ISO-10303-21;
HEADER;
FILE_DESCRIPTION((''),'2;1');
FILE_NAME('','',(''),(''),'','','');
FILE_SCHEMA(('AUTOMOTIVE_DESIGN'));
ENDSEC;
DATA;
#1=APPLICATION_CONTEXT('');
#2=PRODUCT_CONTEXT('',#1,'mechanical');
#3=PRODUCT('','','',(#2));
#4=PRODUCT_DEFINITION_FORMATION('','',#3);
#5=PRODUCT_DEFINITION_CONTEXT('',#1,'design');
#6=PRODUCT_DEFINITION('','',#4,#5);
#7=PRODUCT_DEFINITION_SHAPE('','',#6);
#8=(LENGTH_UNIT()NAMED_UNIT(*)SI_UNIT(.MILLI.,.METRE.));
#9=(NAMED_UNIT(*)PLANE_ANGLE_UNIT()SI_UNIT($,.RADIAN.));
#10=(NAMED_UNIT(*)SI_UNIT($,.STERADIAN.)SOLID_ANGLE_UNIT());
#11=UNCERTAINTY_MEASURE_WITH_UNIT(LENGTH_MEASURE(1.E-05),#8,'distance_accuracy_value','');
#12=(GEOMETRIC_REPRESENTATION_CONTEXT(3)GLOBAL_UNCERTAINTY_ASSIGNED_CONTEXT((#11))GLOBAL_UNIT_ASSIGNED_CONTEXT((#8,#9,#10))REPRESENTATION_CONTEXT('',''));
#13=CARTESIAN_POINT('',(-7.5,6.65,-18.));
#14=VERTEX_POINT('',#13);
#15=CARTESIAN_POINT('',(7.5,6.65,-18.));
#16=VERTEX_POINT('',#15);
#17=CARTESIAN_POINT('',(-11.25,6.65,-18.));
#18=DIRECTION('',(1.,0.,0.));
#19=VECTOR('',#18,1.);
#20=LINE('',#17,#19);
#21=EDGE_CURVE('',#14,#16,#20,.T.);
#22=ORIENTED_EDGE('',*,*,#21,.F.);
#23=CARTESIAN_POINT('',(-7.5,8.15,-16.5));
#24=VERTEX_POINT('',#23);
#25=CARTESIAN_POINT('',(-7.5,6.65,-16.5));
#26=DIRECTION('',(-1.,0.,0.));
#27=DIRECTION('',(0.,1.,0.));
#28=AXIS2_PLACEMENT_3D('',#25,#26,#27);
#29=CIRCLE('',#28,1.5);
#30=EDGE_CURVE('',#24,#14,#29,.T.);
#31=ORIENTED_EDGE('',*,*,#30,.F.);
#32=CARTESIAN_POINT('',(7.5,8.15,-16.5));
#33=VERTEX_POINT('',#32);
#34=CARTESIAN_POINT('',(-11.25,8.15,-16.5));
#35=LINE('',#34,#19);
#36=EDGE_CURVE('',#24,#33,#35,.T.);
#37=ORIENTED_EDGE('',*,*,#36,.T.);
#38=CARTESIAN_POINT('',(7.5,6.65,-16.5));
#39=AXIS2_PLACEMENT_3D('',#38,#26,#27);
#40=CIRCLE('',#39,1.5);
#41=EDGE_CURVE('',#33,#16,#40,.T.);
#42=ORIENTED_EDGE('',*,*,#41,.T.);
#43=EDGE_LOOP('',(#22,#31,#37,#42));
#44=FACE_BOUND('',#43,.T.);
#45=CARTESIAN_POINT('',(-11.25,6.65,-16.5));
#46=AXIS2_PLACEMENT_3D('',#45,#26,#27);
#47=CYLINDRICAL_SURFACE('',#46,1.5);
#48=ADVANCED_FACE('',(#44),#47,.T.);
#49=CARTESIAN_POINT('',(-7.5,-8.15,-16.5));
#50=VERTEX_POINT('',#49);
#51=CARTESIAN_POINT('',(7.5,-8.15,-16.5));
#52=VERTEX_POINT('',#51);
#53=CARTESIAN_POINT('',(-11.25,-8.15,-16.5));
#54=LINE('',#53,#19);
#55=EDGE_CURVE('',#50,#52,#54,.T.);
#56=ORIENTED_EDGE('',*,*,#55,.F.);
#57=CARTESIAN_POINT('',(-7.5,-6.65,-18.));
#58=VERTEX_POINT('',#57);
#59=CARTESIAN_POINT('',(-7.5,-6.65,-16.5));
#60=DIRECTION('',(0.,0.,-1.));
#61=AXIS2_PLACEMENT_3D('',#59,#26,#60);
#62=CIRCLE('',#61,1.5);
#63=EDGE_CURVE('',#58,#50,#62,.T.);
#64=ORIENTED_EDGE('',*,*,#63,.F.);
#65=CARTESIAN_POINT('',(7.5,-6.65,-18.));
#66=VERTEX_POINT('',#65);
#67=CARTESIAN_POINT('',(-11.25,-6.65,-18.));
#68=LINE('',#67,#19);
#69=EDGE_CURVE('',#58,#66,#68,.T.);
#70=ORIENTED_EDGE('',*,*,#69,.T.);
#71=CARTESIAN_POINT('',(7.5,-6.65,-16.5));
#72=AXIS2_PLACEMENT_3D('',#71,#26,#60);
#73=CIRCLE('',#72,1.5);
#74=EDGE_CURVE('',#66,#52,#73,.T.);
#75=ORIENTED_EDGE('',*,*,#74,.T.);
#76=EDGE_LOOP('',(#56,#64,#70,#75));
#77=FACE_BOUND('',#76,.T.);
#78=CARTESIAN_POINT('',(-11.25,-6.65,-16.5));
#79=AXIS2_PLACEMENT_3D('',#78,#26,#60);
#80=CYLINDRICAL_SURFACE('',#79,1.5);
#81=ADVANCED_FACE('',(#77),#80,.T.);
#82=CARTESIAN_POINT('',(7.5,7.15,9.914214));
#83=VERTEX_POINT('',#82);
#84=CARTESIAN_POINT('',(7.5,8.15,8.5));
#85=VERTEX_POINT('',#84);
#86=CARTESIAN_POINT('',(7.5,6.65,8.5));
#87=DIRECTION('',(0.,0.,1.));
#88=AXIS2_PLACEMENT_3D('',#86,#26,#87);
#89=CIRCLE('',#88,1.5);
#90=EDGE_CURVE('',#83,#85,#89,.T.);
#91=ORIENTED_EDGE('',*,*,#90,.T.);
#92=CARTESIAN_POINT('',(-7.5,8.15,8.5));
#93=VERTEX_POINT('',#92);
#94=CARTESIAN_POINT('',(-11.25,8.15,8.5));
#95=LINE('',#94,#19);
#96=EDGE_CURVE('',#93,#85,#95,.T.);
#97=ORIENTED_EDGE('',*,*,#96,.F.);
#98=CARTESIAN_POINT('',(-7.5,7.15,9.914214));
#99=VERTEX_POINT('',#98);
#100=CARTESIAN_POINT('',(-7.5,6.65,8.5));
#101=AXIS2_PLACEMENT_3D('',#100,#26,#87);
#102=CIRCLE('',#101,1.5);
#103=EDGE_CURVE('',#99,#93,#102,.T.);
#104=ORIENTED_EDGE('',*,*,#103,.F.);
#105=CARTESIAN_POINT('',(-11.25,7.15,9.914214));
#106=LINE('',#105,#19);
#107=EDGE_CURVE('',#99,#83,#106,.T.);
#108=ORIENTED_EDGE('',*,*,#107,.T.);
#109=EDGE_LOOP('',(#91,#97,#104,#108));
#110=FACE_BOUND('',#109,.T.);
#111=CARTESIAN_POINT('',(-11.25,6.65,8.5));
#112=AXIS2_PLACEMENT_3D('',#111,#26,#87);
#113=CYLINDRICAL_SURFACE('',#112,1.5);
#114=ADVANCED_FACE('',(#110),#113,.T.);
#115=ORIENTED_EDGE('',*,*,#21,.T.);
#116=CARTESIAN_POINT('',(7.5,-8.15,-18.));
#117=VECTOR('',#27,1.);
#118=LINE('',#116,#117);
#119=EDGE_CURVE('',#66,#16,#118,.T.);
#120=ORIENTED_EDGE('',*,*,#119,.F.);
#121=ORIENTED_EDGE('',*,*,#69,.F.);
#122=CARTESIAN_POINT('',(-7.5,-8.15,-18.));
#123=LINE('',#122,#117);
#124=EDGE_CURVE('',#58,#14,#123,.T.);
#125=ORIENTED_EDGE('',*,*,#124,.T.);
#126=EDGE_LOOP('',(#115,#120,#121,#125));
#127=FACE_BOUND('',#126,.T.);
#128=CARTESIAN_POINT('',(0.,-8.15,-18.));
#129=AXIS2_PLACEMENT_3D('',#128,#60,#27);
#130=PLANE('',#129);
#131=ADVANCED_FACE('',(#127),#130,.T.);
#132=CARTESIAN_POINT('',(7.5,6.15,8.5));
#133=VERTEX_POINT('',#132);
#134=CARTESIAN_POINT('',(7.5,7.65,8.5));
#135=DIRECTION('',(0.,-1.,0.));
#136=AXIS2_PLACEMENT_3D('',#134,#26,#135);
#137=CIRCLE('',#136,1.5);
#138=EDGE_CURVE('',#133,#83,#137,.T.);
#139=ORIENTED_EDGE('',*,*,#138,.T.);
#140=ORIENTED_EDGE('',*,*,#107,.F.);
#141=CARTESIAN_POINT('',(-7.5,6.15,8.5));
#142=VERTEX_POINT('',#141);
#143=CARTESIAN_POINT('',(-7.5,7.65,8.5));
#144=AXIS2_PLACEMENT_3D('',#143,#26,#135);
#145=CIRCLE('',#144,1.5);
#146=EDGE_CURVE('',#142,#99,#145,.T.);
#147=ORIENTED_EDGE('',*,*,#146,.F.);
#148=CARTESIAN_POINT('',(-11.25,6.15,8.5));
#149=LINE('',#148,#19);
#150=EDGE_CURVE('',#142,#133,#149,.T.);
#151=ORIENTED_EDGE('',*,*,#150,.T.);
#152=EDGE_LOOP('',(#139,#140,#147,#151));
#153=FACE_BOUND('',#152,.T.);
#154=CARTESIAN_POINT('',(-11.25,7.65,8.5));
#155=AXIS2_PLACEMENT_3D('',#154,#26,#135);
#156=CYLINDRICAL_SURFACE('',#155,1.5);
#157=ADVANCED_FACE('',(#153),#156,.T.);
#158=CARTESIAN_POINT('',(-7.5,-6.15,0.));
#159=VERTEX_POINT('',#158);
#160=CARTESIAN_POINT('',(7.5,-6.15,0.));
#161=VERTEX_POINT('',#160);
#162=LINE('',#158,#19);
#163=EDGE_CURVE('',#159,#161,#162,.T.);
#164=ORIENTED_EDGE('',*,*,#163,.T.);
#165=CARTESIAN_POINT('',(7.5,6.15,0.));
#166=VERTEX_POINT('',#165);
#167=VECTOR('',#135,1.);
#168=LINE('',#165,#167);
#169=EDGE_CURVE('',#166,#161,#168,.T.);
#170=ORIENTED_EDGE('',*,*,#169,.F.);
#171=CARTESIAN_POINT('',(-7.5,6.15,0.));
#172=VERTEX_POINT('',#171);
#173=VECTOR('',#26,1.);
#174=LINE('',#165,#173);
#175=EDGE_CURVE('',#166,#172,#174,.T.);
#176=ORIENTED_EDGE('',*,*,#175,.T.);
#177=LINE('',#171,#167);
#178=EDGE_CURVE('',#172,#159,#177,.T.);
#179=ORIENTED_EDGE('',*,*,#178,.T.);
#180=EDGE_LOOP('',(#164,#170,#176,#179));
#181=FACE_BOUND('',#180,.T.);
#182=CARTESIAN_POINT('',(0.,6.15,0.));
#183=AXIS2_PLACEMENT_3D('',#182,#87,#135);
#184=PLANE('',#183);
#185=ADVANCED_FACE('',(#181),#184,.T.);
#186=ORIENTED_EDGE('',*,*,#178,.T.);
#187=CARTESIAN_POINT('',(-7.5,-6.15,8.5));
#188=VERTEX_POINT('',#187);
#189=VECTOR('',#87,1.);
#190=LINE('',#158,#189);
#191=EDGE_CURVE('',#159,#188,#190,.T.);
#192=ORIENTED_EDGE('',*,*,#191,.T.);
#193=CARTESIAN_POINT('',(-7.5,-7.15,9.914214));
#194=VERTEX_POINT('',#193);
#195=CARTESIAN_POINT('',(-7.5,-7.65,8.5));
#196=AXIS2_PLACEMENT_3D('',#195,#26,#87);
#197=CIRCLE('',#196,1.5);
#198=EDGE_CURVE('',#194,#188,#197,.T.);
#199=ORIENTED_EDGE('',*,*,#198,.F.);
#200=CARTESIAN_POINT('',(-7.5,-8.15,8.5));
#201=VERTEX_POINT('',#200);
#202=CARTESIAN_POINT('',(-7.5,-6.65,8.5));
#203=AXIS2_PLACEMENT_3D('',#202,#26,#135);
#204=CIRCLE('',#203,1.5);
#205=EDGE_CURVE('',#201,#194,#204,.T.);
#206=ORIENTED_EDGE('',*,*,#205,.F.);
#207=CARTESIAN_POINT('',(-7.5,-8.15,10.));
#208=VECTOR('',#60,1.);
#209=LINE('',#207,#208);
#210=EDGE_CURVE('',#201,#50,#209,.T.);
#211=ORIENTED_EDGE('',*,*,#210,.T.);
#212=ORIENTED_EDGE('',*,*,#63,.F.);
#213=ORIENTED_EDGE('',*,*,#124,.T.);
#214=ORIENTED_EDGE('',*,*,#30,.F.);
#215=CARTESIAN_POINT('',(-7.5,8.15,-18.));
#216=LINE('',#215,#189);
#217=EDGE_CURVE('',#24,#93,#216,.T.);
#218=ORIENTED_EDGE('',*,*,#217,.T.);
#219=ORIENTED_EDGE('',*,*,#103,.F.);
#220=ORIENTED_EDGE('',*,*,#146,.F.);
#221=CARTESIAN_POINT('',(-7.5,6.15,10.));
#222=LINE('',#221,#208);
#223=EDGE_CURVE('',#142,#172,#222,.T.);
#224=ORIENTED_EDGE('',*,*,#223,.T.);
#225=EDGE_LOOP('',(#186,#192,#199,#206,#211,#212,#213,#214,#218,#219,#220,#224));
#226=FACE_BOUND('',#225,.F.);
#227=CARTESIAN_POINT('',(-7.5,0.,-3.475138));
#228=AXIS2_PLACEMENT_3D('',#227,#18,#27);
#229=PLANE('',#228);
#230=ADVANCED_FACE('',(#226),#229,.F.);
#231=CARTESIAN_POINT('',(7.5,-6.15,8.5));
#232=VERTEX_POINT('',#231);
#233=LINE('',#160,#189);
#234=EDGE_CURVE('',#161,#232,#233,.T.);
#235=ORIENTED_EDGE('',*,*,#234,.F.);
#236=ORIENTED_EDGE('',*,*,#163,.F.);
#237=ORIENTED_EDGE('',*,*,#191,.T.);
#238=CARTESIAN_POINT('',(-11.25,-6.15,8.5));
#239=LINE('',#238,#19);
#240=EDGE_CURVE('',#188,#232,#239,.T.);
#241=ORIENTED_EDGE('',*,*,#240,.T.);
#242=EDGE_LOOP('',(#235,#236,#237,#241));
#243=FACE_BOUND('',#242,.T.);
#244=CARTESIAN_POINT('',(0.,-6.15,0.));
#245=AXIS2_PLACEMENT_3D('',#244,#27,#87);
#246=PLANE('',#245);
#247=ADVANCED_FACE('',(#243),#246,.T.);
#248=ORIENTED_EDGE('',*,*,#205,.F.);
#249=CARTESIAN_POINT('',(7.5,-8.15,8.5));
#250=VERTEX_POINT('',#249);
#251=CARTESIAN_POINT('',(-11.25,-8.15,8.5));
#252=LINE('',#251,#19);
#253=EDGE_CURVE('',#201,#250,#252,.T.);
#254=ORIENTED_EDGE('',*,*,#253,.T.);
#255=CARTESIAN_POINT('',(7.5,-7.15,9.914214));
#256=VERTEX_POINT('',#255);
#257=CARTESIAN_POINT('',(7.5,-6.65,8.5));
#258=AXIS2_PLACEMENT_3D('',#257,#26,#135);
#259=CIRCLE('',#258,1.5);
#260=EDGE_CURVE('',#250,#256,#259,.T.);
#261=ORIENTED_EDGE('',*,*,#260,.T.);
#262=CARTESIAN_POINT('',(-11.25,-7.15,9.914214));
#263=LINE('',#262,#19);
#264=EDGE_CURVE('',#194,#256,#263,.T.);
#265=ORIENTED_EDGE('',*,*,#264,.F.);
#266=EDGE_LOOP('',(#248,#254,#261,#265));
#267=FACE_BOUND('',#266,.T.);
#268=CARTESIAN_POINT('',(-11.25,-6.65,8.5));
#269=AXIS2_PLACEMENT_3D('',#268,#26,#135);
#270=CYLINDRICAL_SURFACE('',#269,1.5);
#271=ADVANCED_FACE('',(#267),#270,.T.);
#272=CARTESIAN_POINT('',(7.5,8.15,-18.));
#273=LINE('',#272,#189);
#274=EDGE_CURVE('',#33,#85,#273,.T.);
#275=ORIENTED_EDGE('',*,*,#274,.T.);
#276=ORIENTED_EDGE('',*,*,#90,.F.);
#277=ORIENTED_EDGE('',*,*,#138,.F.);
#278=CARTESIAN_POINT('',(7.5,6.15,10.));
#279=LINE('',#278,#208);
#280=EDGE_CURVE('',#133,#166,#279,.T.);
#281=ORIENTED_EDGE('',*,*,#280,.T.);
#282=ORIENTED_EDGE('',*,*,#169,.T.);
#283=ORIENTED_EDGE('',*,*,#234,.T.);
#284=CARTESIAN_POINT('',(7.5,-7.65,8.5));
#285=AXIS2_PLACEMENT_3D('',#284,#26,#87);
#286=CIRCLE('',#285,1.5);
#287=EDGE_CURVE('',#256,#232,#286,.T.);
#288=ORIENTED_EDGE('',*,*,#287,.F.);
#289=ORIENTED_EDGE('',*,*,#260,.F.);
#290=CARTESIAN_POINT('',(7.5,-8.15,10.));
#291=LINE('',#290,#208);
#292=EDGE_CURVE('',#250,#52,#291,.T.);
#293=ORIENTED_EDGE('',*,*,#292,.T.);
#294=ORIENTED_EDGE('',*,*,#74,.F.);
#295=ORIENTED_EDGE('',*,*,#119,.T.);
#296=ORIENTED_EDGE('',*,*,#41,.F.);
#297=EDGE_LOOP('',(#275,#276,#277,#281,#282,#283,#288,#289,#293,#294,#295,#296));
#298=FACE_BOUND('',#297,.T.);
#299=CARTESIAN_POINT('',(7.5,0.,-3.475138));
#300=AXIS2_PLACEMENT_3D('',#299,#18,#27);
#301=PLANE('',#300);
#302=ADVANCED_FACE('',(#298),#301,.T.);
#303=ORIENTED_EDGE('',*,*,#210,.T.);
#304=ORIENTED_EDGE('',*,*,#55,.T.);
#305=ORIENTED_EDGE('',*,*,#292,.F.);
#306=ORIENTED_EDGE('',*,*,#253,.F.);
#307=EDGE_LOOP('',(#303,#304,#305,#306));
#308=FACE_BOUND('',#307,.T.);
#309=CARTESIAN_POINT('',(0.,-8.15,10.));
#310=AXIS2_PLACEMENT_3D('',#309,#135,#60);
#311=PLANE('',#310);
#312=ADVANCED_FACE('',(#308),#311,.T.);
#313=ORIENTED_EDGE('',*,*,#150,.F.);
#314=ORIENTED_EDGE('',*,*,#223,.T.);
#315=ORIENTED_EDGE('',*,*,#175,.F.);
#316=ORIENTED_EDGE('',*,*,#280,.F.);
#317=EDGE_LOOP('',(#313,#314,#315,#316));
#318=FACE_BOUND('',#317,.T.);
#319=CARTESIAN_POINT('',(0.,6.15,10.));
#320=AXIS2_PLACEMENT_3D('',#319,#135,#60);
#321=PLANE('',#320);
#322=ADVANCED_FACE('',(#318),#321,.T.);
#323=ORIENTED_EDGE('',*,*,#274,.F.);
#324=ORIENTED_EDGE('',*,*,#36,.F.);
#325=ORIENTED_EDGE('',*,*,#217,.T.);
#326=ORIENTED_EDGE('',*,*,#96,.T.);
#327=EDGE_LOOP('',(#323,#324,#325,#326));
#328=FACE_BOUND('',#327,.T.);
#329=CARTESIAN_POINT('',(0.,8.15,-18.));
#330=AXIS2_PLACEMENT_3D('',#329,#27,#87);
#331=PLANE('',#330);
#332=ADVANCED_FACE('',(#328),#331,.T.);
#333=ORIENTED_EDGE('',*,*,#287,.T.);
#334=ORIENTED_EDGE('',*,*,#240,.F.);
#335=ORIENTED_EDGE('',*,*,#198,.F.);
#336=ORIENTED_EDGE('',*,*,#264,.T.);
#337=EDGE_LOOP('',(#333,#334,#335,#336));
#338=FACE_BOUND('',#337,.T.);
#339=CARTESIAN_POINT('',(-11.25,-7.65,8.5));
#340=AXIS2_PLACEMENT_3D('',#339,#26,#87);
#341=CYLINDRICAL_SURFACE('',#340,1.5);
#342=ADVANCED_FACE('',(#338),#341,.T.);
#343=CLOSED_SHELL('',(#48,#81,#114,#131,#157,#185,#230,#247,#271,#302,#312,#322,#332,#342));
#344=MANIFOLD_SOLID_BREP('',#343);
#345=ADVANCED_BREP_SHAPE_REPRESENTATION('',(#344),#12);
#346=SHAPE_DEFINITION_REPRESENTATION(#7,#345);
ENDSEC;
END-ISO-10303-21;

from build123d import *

# Parameters (mm, degrees)
F1_DEPTH    = 7.5
F2_T1_DEPTH = 22.5


# Not quite as in the source:
# - a fillet or chamfer that OpenCascade refuses, or shapes differently, is made with other operations: its cross-section is extruded or revolved along the edge and cut away or added


with BuildPart() as f1:
    # F0 (on Right) → F1 (new body, symmetric)
    with BuildSketch(Plane.YZ):
        Polygon((6.15, 0), (0, 0), (-6.15, 0), (-6.15, 10), (-8.15, 10), (-8.15, -18), (0, -18), (8.15, -18), (8.15, 10), (6.15, 10), align=None)
    extrude(amount=F1_DEPTH, both=True)

    # F2: fillet of radius 1.5 on 6 edges, made by hand

    # F2_s2 → F2_t1 (cut)
    with BuildSketch(Plane.YZ.offset(-11.25)):
        with BuildLine():
            ThreePointArc((-8.15, 8.5), (-7.7106601718, 9.5606601718), (-6.65, 10))
            Line((-6.65, 10), (-8.15, 10))
            Line((-8.15, 10), (-8.15, 8.5))
        make_face()
        with BuildLine():
            ThreePointArc((-7.65, 10), (-6.5893398282, 9.5606601718), (-6.15, 8.5))
            Line((-6.15, 8.5), (-6.15, 10))
            Line((-6.15, 10), (-7.65, 10))
        make_face()
        with BuildLine():
            ThreePointArc((6.15, 8.5), (6.5893398282, 9.5606601718), (7.65, 10))
            Line((7.65, 10), (6.15, 10))
            Line((6.15, 10), (6.15, 8.5))
        make_face()
        with BuildLine():
            ThreePointArc((6.65, 10), (7.7106601718, 9.5606601718), (8.15, 8.5))
            Line((8.15, 8.5), (8.15, 10))
            Line((8.15, 10), (6.65, 10))
        make_face()
        with BuildLine():
            ThreePointArc((-6.65, -18), (-7.7106601718, -17.5606601718), (-8.15, -16.5))
            Line((-8.15, -16.5), (-8.15, -18))
            Line((-8.15, -18), (-6.65, -18))
        make_face()
        with BuildLine():
            ThreePointArc((8.15, -16.5), (7.7106601718, -17.5606601718), (6.65, -18))
            Line((6.65, -18), (8.15, -18))
            Line((8.15, -18), (8.15, -16.5))
        make_face()
    extrude(amount=F2_T1_DEPTH, mode=Mode.SUBTRACT)


solid = f1.part
